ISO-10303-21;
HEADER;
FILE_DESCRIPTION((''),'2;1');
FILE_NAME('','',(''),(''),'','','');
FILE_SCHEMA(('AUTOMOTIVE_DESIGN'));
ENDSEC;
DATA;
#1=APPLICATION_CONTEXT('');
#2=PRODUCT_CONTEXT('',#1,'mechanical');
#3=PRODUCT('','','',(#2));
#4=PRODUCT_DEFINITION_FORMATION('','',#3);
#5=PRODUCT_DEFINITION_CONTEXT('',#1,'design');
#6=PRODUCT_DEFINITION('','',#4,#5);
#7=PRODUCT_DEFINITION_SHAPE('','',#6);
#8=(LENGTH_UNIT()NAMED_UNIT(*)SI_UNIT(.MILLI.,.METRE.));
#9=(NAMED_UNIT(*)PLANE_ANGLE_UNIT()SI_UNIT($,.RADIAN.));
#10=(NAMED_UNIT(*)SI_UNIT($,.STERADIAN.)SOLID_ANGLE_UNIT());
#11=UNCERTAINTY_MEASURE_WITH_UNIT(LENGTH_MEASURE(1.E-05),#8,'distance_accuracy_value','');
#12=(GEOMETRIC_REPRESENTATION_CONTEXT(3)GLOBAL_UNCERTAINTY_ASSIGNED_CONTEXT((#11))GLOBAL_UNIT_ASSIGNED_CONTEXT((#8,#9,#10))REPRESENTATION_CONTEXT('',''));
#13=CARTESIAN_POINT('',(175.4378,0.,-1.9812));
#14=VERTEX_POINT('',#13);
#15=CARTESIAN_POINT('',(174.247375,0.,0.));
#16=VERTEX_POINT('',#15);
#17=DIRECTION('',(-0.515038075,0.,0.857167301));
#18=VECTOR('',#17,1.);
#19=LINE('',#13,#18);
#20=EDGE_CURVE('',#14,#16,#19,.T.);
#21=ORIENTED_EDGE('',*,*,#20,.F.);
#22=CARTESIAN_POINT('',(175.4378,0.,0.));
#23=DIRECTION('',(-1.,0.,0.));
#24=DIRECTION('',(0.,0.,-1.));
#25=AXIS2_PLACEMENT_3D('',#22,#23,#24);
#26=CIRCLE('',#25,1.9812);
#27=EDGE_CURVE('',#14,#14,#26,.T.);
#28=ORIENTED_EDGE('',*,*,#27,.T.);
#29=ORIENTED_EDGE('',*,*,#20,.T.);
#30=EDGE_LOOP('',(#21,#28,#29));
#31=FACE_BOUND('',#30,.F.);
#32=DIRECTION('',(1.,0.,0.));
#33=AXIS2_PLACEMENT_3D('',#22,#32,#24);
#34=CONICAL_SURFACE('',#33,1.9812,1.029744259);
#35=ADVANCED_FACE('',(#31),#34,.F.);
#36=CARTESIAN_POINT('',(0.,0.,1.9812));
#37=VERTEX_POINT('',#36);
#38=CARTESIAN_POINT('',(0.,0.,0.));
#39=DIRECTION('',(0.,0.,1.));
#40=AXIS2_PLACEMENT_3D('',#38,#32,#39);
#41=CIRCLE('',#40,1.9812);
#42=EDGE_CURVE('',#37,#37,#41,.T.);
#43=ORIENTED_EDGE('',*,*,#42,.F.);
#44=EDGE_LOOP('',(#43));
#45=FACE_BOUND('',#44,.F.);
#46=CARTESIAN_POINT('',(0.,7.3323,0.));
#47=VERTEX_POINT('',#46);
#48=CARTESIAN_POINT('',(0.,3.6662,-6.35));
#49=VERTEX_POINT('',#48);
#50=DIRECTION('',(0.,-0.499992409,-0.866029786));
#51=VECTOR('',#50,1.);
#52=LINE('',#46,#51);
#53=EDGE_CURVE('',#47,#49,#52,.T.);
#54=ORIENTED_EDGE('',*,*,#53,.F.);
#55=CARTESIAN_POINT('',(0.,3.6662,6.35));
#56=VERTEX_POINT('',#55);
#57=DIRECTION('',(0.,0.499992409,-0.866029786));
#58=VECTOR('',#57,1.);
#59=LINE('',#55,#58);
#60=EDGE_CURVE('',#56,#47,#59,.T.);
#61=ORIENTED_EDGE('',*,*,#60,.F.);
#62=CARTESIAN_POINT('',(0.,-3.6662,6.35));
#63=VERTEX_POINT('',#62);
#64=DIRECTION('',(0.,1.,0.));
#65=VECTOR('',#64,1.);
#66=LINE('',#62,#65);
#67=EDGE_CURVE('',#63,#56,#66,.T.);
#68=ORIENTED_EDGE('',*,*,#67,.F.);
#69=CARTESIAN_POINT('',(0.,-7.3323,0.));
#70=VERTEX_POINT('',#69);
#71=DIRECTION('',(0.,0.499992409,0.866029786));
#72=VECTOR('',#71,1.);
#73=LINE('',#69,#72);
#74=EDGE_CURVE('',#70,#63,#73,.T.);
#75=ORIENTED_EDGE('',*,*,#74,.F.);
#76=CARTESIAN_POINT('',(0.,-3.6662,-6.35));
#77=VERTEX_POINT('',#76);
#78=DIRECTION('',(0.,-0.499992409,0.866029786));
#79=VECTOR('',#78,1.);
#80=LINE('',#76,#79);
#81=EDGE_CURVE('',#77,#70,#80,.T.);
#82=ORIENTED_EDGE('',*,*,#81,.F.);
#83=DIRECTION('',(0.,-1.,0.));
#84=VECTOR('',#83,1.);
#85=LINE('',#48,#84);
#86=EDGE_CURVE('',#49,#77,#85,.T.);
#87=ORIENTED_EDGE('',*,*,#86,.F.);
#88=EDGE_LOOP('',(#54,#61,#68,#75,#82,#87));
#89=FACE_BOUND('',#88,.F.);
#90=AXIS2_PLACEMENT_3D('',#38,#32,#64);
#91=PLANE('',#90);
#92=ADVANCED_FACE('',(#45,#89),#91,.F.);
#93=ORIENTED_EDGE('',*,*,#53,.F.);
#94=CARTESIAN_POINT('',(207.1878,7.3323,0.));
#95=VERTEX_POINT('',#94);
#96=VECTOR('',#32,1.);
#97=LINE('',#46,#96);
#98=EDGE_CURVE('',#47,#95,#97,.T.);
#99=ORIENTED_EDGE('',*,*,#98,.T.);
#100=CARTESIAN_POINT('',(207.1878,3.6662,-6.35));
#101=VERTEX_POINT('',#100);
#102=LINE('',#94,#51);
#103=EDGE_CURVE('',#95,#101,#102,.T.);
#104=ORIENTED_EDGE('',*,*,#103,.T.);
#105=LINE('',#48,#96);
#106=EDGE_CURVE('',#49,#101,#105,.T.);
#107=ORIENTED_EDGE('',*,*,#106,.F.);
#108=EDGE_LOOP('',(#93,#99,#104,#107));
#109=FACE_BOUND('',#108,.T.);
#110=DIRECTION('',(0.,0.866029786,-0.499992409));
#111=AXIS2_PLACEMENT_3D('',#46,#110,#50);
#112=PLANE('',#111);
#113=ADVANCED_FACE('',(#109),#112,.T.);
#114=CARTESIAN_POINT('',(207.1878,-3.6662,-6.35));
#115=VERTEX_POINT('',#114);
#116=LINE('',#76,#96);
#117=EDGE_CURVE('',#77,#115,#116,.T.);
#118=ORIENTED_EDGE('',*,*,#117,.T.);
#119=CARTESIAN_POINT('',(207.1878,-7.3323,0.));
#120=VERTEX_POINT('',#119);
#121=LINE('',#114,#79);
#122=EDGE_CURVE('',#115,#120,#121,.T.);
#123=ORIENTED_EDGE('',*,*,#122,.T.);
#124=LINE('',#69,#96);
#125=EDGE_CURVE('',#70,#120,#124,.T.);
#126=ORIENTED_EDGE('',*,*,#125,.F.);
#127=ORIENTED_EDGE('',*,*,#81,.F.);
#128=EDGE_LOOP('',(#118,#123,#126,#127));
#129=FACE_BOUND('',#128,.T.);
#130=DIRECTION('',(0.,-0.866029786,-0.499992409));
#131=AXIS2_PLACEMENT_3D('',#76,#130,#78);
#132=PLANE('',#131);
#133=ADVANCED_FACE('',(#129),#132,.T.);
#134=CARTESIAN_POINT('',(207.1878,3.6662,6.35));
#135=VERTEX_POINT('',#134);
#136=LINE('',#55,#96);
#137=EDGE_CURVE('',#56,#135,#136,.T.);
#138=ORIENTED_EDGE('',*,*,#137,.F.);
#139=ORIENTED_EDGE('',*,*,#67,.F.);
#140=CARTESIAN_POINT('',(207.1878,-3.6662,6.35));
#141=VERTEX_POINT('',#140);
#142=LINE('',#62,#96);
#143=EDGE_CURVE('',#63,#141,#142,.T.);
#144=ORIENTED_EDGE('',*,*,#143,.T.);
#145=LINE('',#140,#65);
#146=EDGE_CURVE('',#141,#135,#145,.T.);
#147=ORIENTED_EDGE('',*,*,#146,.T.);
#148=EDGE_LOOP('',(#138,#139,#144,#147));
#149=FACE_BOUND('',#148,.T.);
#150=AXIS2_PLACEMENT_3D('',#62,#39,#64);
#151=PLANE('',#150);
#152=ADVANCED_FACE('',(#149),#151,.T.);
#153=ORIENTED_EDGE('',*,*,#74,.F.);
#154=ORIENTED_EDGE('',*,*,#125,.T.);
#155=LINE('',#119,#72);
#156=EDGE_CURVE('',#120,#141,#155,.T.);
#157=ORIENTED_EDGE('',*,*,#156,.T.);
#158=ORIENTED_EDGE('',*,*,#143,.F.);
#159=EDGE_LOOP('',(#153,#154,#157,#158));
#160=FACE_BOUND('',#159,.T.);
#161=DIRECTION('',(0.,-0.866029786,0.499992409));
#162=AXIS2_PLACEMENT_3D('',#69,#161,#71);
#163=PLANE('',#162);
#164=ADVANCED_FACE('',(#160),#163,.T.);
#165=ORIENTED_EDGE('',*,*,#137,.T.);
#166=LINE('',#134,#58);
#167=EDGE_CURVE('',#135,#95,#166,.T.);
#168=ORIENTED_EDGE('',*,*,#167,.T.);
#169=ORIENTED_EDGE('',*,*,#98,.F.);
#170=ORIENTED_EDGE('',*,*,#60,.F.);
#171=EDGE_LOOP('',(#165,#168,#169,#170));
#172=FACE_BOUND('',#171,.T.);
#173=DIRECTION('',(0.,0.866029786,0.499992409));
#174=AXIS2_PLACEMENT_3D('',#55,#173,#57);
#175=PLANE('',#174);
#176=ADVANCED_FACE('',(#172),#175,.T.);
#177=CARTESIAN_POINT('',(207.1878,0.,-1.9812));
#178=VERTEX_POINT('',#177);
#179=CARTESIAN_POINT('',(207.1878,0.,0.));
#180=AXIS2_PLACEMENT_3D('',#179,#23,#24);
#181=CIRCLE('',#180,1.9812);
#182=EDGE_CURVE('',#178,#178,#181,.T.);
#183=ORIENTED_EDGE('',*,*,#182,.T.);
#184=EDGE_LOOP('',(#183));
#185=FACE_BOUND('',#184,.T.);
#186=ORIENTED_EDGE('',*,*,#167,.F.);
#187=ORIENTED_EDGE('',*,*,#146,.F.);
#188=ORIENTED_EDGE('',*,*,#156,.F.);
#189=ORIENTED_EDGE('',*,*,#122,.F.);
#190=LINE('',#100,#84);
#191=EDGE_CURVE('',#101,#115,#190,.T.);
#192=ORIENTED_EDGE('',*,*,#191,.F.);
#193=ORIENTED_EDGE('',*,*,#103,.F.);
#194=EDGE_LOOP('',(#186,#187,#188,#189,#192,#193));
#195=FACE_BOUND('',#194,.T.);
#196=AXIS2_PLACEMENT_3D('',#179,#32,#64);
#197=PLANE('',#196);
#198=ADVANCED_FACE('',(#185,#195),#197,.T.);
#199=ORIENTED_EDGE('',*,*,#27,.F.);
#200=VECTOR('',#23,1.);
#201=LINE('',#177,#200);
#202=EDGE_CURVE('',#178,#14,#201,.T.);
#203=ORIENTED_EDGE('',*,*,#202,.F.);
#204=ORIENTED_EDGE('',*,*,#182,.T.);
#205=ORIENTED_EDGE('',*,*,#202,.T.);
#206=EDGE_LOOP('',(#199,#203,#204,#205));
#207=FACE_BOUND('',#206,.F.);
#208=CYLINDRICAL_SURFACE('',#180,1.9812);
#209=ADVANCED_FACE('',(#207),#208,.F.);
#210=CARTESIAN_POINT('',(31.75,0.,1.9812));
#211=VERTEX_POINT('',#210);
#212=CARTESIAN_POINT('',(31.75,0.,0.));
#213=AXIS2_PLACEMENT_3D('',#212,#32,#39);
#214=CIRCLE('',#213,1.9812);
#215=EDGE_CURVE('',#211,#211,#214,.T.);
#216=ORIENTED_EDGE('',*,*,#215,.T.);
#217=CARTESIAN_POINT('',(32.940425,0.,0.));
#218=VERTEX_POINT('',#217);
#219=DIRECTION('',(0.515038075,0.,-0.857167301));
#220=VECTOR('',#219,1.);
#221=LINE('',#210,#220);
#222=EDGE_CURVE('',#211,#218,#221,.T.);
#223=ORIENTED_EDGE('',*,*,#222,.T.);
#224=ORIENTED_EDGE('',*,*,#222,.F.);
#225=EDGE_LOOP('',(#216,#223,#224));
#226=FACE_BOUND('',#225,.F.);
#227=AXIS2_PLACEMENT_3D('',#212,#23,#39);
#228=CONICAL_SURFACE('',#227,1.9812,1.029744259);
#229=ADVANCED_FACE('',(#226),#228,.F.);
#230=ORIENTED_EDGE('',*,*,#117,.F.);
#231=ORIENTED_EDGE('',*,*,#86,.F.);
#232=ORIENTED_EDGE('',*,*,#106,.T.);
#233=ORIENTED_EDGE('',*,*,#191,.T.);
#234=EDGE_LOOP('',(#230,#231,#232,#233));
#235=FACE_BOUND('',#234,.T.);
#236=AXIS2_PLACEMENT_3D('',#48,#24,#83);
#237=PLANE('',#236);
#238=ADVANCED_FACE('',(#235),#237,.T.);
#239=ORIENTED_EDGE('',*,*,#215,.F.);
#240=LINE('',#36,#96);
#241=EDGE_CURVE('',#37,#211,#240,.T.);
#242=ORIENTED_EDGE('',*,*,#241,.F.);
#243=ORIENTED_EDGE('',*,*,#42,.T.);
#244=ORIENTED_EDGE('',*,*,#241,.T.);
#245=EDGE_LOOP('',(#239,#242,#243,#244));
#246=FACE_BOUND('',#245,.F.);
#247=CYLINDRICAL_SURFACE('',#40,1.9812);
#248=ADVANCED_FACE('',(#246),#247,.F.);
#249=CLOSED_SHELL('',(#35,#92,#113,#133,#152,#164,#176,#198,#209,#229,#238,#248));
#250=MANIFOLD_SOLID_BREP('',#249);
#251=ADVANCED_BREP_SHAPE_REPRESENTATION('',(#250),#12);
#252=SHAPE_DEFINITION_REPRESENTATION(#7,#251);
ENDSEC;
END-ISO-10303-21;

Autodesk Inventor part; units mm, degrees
ref_plane "YZ Plane" through (0, 0, 0) normal (1, 0, 0) x (0, 1, 0)
ref_plane "XZ Plane" through (0, 0, 0) normal (0, 1, 0) x (-1, 0, 0)
ref_plane "XY Plane" through (0, 0, 0) normal (0, 0, 1) x (1, 0, 0)
sketch "Sketch1" plane through (0, 0, 0) normal (1, 0, 0) x (0, 1, 0)
  line L0 (-3.6662, -6.35) -> (-7.3323, 0)
  line L1 (-7.3323, 0) -> (-3.6662, 6.35)
  line L2 (-3.6662, 6.35) -> (3.6662, 6.35)
  line L3 (3.6662, 6.35) -> (7.3323, 0)
  line L4 (7.3323, 0) -> (3.6662, -6.35)
  line L5 (3.6662, -6.35) -> (-3.6662, -6.35)
  point P0 (0, 0)
  point P1 (0, 0)
  dimension "d0" = 12.7
extrude "Extrusion1" add sketch "Sketch1" along normal blind 207.1878
sketch "Sketch2" plane through (0, 0, 0) normal (-1, 0, 0) x (0, 0, 1)
  point P0 (0, 0)
  point P1 (0, 0)
hole "Hole1" at (0, 0, 0) direction (1, 0, 0) diameter 3.9624 depth 31.75 tip angle 118 thread size "10-32 UNF" class "2B" standard "ANSI Unified Screw Threads"
sketch "Sketch3" plane through (207.1878, 0, 0) normal (1, 0, 0) x (0, 0, -1)
  circle A0 centre (0, 0) radius 1.9812 projected
hole "Hole2" at (207.1878, 0, 0) direction (-1, 0, 0) diameter 3.9624 depth 31.75 tip angle 118 thread size "10-32 UNF" class "2B" standard "ANSI Unified Screw Threads"
properties part number "STOCK,HEX,SHAFT,KICKER,BACK"
